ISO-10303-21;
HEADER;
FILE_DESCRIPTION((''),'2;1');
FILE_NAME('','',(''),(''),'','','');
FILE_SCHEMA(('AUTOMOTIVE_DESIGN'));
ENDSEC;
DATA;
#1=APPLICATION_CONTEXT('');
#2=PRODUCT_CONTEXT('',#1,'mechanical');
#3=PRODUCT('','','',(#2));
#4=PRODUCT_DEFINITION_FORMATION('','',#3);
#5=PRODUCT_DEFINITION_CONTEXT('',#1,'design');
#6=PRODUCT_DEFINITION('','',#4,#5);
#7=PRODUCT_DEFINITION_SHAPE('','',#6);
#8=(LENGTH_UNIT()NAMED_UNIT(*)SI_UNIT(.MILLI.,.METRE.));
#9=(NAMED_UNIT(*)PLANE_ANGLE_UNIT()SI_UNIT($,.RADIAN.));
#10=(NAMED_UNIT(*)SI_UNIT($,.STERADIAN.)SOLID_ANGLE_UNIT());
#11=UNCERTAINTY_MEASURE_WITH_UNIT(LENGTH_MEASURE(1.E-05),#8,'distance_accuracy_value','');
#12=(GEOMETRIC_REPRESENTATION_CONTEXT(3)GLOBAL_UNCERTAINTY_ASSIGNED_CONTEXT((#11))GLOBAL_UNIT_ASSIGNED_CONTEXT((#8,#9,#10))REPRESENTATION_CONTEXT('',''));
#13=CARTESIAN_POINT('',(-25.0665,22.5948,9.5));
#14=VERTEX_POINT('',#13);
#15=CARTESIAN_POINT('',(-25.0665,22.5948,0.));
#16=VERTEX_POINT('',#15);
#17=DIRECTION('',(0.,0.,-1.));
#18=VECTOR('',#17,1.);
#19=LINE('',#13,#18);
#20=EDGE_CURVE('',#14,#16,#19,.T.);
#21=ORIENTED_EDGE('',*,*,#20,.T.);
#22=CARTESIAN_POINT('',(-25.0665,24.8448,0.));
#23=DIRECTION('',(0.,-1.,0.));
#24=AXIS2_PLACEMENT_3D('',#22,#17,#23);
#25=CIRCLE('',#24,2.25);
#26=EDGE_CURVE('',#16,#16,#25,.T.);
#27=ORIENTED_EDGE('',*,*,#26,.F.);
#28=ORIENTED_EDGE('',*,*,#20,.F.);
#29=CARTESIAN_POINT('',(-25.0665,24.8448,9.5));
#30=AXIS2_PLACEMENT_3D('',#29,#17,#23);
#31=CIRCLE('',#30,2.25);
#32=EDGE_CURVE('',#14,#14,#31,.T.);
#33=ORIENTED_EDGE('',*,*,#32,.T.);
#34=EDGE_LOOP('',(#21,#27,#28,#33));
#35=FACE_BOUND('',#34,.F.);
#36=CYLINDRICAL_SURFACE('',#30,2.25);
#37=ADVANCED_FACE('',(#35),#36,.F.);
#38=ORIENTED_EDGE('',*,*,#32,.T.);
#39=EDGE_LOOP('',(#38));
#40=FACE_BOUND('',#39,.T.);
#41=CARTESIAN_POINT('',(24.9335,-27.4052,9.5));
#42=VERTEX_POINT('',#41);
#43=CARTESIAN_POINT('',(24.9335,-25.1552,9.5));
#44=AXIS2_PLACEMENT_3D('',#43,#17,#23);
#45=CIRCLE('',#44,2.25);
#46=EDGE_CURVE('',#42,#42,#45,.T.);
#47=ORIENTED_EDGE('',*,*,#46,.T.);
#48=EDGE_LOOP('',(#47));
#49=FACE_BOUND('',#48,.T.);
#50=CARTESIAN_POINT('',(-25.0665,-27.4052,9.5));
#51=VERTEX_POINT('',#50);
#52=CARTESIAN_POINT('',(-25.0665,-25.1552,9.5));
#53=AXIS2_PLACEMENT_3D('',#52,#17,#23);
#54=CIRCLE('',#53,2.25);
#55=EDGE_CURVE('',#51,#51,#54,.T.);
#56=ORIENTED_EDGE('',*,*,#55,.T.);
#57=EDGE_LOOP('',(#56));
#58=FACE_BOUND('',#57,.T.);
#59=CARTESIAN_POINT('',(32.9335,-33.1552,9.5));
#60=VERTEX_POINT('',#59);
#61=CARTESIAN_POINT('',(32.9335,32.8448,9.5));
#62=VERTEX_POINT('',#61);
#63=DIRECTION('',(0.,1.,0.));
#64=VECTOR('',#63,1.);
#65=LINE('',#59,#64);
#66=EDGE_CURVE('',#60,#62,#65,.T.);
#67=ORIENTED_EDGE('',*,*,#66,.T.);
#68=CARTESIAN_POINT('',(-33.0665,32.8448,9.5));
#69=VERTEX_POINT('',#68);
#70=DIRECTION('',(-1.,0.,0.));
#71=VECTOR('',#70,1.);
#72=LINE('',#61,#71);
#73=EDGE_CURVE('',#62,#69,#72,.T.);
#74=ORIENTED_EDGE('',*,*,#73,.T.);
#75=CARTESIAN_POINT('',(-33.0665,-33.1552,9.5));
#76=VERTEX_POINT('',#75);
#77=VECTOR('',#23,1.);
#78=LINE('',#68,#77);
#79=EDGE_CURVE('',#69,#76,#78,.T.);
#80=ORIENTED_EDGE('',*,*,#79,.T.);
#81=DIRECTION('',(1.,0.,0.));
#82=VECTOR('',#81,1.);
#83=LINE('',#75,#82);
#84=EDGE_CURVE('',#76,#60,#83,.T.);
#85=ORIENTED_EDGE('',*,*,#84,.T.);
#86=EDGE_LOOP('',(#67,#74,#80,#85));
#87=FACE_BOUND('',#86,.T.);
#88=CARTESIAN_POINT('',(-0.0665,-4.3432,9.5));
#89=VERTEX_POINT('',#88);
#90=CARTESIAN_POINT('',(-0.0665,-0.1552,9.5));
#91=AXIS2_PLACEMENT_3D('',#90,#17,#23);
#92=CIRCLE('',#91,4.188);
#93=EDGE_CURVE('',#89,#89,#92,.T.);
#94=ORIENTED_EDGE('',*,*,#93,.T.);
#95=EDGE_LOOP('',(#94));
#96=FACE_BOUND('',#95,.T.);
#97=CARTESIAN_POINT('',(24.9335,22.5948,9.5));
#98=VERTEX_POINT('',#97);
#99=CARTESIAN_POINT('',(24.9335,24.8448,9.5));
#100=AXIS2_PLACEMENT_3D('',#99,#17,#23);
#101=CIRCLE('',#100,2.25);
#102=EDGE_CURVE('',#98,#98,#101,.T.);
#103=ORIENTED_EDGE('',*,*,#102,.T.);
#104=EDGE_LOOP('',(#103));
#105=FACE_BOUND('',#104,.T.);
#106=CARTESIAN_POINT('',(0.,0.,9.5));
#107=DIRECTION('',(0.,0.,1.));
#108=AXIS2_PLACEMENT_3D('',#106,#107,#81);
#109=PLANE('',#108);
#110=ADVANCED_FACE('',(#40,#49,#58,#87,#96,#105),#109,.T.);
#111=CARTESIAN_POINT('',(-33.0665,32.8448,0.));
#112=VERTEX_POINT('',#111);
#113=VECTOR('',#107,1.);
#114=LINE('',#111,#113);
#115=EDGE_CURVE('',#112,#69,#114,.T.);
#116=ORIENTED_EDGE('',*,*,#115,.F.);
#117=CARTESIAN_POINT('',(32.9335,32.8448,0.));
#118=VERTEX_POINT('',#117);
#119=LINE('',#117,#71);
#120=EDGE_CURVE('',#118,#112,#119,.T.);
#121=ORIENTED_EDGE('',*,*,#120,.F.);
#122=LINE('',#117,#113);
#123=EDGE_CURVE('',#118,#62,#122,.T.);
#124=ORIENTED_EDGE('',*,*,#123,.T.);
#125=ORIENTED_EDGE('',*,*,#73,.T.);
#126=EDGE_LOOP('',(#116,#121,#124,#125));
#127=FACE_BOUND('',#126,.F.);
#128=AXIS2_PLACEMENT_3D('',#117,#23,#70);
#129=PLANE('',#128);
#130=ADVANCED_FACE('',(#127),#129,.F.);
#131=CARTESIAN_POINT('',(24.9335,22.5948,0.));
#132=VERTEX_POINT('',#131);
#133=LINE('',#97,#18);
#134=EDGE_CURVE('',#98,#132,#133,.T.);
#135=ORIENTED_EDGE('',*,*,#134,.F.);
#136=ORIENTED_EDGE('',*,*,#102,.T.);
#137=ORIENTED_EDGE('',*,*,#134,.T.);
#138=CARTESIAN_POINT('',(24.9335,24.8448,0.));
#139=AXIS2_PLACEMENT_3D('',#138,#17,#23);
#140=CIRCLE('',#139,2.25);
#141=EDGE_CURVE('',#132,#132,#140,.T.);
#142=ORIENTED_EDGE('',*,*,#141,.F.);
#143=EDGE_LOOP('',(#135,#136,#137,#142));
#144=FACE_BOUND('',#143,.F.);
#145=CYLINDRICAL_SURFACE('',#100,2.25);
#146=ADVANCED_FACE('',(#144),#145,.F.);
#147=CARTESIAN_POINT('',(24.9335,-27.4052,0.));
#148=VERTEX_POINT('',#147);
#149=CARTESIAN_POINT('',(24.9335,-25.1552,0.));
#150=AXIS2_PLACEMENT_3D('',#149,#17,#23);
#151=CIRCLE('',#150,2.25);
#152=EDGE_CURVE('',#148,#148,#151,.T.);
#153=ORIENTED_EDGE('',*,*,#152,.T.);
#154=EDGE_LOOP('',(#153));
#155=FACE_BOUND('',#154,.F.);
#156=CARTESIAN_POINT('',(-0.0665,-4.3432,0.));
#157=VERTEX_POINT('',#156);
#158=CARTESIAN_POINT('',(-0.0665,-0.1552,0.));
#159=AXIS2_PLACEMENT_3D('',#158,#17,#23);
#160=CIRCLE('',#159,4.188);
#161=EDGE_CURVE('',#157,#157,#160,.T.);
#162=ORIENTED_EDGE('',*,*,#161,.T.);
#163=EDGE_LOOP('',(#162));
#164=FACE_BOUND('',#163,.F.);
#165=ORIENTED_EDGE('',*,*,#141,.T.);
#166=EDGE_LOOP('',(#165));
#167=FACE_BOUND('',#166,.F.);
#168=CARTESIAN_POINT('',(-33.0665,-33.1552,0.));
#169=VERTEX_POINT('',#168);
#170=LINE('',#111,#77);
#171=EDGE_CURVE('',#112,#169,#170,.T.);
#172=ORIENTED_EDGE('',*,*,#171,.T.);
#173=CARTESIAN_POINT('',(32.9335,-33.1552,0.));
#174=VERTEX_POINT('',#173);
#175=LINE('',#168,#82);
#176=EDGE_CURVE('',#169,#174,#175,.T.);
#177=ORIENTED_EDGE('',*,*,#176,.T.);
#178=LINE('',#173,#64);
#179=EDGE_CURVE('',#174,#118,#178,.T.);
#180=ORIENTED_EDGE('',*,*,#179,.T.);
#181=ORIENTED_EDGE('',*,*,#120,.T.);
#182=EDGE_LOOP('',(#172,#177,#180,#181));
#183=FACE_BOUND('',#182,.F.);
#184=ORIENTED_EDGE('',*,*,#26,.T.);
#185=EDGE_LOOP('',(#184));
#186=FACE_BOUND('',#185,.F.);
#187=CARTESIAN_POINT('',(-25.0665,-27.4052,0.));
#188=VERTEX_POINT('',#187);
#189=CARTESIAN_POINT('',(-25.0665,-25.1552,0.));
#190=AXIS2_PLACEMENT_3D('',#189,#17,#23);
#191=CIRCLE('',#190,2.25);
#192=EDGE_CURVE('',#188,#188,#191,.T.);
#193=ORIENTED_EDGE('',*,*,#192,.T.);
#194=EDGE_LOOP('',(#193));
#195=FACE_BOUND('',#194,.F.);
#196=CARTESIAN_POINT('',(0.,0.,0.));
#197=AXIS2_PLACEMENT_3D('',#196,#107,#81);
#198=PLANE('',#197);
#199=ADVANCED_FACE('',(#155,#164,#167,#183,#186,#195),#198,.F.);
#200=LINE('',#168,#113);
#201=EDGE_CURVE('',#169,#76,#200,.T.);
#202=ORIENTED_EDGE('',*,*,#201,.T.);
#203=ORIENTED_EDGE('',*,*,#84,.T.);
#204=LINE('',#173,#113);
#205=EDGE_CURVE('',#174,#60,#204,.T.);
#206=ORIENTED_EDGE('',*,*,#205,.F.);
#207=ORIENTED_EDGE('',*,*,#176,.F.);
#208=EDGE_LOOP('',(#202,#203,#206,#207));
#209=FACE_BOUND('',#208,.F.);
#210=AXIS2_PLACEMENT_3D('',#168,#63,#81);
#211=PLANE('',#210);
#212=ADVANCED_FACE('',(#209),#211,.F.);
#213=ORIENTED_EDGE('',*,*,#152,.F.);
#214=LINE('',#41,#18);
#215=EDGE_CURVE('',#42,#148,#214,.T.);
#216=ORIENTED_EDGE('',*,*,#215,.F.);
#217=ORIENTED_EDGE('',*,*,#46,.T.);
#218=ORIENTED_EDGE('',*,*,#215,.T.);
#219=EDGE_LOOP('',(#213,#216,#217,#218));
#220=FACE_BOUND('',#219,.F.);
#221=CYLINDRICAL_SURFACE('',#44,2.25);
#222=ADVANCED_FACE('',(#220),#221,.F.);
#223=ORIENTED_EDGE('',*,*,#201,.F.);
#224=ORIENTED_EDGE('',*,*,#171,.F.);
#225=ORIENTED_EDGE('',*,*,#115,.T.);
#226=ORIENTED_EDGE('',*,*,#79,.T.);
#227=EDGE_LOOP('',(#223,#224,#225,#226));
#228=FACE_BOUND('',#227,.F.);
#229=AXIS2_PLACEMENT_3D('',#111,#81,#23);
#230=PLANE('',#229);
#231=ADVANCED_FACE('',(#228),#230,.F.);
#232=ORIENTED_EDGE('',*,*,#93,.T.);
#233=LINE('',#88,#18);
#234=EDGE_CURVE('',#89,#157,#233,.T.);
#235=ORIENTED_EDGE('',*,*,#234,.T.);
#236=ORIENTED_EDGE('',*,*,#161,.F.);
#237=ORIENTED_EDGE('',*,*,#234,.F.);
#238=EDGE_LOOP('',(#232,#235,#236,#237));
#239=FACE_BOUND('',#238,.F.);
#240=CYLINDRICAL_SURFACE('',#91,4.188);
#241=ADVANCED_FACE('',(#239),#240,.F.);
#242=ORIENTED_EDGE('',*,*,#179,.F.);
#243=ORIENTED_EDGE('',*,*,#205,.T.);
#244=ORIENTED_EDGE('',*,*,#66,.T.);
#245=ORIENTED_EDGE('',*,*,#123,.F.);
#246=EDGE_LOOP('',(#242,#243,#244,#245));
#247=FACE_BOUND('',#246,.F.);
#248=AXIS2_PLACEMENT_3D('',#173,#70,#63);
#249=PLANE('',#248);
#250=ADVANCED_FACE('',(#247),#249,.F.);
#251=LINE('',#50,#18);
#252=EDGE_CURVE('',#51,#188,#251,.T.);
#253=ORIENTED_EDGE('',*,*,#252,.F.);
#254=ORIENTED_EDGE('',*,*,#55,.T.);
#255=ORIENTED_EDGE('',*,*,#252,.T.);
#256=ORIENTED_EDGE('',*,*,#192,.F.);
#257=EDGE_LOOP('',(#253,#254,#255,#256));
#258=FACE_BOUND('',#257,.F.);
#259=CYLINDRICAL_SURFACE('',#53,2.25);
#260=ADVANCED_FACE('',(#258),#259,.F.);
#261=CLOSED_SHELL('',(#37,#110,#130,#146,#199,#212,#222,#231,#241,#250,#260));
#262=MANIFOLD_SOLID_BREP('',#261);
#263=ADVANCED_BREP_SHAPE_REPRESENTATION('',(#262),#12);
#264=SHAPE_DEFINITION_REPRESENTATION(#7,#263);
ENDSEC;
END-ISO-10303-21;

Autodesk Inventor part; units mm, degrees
ref_plane "YZ Plane" through (0, 0, 0) normal (1, 0, 0) x (0, 1, 0)
ref_plane "XZ Plane" through (0, 0, 0) normal (0, 1, 0) x (-1, 0, 0)
ref_plane "XY Plane" through (0, 0, 0) normal (0, 0, 1) x (1, 0, 0)
sketch "Esboço1" plane through (0, 0, 0) normal (0, 0, 1) x (1, 0, 0)
  circle A0 centre (-25.0665, 24.8448) radius 1.621
  circle A1 centre (24.9335, -25.1552) radius 1.621
  line L0 (-25.0665, 24.8448) -> (24.9335, -25.1552)
  line L1 (-33.0665, -33.1552) -> (32.9335, -33.1552)
  line L2 (32.9335, -33.1552) -> (32.9335, 32.8448)
  line L3 (32.9335, 32.8448) -> (-33.0665, 32.8448)
  line L4 (-33.0665, 32.8448) -> (-33.0665, -33.1552)
  line L5 (-33.0665, -33.1552) -> (32.9335, 32.8448) construction
  line L6 (32.9335, -33.1552) -> (-33.0665, 32.8448) construction
  circle A2 centre (-0.0665, -0.1552) radius 2.5192
  circle A3 centre (24.9335, 24.8448) radius 1.621
  circle A4 centre (-25.0665, -25.1552) radius 1.621
  point P0 (0, 0)
  dimension "d0" = 66
  dimension "d1" = 66
extrude "Extrusão1" add sketch "Esboço1" along normal blind 9.5
sketch "Esboço2" plane through (0, 0, 9.5) normal (0, 0, 1) x (1, 0, 0)
  circle A0 centre (24.9335, 24.8448) radius 1.621 projected
  circle A1 centre (-25.0665, 24.8448) radius 1.621 projected
  circle A2 centre (-25.0665, -25.1552) radius 1.621 projected
  circle A3 centre (24.9335, -25.1552) radius 1.621 projected
  point P0 (0, 0)
hole "Furo1" at (24.9335, 24.8448, 9.5) at (-25.0665, 24.8448, 9.5) at (-25.0665, -25.1552, 9.5) at (24.9335, -25.1552, 9.5) direction (0, 0, -1) diameter 4.5 end through all clearance for "Countersunk Flat Head Screw ISO 2009/7046" size "M4" standard "ISO"
sketch "Esboço3" plane through (0, 0, 9.5) normal (0, 0, 1) x (1, 0, 0)
  circle A0 centre (-0.0665, -0.1552) radius 2.5192 projected
  point P0 (0, 0)
hole "Furo2" at (-0.0665, -0.1552, 9.5) direction (0, 0, -1) diameter 8.376 end through all thread size "M10x1.5" class "6H" standard "ISO Metric profile"
properties part number "Acoplador do pé nivelador"
